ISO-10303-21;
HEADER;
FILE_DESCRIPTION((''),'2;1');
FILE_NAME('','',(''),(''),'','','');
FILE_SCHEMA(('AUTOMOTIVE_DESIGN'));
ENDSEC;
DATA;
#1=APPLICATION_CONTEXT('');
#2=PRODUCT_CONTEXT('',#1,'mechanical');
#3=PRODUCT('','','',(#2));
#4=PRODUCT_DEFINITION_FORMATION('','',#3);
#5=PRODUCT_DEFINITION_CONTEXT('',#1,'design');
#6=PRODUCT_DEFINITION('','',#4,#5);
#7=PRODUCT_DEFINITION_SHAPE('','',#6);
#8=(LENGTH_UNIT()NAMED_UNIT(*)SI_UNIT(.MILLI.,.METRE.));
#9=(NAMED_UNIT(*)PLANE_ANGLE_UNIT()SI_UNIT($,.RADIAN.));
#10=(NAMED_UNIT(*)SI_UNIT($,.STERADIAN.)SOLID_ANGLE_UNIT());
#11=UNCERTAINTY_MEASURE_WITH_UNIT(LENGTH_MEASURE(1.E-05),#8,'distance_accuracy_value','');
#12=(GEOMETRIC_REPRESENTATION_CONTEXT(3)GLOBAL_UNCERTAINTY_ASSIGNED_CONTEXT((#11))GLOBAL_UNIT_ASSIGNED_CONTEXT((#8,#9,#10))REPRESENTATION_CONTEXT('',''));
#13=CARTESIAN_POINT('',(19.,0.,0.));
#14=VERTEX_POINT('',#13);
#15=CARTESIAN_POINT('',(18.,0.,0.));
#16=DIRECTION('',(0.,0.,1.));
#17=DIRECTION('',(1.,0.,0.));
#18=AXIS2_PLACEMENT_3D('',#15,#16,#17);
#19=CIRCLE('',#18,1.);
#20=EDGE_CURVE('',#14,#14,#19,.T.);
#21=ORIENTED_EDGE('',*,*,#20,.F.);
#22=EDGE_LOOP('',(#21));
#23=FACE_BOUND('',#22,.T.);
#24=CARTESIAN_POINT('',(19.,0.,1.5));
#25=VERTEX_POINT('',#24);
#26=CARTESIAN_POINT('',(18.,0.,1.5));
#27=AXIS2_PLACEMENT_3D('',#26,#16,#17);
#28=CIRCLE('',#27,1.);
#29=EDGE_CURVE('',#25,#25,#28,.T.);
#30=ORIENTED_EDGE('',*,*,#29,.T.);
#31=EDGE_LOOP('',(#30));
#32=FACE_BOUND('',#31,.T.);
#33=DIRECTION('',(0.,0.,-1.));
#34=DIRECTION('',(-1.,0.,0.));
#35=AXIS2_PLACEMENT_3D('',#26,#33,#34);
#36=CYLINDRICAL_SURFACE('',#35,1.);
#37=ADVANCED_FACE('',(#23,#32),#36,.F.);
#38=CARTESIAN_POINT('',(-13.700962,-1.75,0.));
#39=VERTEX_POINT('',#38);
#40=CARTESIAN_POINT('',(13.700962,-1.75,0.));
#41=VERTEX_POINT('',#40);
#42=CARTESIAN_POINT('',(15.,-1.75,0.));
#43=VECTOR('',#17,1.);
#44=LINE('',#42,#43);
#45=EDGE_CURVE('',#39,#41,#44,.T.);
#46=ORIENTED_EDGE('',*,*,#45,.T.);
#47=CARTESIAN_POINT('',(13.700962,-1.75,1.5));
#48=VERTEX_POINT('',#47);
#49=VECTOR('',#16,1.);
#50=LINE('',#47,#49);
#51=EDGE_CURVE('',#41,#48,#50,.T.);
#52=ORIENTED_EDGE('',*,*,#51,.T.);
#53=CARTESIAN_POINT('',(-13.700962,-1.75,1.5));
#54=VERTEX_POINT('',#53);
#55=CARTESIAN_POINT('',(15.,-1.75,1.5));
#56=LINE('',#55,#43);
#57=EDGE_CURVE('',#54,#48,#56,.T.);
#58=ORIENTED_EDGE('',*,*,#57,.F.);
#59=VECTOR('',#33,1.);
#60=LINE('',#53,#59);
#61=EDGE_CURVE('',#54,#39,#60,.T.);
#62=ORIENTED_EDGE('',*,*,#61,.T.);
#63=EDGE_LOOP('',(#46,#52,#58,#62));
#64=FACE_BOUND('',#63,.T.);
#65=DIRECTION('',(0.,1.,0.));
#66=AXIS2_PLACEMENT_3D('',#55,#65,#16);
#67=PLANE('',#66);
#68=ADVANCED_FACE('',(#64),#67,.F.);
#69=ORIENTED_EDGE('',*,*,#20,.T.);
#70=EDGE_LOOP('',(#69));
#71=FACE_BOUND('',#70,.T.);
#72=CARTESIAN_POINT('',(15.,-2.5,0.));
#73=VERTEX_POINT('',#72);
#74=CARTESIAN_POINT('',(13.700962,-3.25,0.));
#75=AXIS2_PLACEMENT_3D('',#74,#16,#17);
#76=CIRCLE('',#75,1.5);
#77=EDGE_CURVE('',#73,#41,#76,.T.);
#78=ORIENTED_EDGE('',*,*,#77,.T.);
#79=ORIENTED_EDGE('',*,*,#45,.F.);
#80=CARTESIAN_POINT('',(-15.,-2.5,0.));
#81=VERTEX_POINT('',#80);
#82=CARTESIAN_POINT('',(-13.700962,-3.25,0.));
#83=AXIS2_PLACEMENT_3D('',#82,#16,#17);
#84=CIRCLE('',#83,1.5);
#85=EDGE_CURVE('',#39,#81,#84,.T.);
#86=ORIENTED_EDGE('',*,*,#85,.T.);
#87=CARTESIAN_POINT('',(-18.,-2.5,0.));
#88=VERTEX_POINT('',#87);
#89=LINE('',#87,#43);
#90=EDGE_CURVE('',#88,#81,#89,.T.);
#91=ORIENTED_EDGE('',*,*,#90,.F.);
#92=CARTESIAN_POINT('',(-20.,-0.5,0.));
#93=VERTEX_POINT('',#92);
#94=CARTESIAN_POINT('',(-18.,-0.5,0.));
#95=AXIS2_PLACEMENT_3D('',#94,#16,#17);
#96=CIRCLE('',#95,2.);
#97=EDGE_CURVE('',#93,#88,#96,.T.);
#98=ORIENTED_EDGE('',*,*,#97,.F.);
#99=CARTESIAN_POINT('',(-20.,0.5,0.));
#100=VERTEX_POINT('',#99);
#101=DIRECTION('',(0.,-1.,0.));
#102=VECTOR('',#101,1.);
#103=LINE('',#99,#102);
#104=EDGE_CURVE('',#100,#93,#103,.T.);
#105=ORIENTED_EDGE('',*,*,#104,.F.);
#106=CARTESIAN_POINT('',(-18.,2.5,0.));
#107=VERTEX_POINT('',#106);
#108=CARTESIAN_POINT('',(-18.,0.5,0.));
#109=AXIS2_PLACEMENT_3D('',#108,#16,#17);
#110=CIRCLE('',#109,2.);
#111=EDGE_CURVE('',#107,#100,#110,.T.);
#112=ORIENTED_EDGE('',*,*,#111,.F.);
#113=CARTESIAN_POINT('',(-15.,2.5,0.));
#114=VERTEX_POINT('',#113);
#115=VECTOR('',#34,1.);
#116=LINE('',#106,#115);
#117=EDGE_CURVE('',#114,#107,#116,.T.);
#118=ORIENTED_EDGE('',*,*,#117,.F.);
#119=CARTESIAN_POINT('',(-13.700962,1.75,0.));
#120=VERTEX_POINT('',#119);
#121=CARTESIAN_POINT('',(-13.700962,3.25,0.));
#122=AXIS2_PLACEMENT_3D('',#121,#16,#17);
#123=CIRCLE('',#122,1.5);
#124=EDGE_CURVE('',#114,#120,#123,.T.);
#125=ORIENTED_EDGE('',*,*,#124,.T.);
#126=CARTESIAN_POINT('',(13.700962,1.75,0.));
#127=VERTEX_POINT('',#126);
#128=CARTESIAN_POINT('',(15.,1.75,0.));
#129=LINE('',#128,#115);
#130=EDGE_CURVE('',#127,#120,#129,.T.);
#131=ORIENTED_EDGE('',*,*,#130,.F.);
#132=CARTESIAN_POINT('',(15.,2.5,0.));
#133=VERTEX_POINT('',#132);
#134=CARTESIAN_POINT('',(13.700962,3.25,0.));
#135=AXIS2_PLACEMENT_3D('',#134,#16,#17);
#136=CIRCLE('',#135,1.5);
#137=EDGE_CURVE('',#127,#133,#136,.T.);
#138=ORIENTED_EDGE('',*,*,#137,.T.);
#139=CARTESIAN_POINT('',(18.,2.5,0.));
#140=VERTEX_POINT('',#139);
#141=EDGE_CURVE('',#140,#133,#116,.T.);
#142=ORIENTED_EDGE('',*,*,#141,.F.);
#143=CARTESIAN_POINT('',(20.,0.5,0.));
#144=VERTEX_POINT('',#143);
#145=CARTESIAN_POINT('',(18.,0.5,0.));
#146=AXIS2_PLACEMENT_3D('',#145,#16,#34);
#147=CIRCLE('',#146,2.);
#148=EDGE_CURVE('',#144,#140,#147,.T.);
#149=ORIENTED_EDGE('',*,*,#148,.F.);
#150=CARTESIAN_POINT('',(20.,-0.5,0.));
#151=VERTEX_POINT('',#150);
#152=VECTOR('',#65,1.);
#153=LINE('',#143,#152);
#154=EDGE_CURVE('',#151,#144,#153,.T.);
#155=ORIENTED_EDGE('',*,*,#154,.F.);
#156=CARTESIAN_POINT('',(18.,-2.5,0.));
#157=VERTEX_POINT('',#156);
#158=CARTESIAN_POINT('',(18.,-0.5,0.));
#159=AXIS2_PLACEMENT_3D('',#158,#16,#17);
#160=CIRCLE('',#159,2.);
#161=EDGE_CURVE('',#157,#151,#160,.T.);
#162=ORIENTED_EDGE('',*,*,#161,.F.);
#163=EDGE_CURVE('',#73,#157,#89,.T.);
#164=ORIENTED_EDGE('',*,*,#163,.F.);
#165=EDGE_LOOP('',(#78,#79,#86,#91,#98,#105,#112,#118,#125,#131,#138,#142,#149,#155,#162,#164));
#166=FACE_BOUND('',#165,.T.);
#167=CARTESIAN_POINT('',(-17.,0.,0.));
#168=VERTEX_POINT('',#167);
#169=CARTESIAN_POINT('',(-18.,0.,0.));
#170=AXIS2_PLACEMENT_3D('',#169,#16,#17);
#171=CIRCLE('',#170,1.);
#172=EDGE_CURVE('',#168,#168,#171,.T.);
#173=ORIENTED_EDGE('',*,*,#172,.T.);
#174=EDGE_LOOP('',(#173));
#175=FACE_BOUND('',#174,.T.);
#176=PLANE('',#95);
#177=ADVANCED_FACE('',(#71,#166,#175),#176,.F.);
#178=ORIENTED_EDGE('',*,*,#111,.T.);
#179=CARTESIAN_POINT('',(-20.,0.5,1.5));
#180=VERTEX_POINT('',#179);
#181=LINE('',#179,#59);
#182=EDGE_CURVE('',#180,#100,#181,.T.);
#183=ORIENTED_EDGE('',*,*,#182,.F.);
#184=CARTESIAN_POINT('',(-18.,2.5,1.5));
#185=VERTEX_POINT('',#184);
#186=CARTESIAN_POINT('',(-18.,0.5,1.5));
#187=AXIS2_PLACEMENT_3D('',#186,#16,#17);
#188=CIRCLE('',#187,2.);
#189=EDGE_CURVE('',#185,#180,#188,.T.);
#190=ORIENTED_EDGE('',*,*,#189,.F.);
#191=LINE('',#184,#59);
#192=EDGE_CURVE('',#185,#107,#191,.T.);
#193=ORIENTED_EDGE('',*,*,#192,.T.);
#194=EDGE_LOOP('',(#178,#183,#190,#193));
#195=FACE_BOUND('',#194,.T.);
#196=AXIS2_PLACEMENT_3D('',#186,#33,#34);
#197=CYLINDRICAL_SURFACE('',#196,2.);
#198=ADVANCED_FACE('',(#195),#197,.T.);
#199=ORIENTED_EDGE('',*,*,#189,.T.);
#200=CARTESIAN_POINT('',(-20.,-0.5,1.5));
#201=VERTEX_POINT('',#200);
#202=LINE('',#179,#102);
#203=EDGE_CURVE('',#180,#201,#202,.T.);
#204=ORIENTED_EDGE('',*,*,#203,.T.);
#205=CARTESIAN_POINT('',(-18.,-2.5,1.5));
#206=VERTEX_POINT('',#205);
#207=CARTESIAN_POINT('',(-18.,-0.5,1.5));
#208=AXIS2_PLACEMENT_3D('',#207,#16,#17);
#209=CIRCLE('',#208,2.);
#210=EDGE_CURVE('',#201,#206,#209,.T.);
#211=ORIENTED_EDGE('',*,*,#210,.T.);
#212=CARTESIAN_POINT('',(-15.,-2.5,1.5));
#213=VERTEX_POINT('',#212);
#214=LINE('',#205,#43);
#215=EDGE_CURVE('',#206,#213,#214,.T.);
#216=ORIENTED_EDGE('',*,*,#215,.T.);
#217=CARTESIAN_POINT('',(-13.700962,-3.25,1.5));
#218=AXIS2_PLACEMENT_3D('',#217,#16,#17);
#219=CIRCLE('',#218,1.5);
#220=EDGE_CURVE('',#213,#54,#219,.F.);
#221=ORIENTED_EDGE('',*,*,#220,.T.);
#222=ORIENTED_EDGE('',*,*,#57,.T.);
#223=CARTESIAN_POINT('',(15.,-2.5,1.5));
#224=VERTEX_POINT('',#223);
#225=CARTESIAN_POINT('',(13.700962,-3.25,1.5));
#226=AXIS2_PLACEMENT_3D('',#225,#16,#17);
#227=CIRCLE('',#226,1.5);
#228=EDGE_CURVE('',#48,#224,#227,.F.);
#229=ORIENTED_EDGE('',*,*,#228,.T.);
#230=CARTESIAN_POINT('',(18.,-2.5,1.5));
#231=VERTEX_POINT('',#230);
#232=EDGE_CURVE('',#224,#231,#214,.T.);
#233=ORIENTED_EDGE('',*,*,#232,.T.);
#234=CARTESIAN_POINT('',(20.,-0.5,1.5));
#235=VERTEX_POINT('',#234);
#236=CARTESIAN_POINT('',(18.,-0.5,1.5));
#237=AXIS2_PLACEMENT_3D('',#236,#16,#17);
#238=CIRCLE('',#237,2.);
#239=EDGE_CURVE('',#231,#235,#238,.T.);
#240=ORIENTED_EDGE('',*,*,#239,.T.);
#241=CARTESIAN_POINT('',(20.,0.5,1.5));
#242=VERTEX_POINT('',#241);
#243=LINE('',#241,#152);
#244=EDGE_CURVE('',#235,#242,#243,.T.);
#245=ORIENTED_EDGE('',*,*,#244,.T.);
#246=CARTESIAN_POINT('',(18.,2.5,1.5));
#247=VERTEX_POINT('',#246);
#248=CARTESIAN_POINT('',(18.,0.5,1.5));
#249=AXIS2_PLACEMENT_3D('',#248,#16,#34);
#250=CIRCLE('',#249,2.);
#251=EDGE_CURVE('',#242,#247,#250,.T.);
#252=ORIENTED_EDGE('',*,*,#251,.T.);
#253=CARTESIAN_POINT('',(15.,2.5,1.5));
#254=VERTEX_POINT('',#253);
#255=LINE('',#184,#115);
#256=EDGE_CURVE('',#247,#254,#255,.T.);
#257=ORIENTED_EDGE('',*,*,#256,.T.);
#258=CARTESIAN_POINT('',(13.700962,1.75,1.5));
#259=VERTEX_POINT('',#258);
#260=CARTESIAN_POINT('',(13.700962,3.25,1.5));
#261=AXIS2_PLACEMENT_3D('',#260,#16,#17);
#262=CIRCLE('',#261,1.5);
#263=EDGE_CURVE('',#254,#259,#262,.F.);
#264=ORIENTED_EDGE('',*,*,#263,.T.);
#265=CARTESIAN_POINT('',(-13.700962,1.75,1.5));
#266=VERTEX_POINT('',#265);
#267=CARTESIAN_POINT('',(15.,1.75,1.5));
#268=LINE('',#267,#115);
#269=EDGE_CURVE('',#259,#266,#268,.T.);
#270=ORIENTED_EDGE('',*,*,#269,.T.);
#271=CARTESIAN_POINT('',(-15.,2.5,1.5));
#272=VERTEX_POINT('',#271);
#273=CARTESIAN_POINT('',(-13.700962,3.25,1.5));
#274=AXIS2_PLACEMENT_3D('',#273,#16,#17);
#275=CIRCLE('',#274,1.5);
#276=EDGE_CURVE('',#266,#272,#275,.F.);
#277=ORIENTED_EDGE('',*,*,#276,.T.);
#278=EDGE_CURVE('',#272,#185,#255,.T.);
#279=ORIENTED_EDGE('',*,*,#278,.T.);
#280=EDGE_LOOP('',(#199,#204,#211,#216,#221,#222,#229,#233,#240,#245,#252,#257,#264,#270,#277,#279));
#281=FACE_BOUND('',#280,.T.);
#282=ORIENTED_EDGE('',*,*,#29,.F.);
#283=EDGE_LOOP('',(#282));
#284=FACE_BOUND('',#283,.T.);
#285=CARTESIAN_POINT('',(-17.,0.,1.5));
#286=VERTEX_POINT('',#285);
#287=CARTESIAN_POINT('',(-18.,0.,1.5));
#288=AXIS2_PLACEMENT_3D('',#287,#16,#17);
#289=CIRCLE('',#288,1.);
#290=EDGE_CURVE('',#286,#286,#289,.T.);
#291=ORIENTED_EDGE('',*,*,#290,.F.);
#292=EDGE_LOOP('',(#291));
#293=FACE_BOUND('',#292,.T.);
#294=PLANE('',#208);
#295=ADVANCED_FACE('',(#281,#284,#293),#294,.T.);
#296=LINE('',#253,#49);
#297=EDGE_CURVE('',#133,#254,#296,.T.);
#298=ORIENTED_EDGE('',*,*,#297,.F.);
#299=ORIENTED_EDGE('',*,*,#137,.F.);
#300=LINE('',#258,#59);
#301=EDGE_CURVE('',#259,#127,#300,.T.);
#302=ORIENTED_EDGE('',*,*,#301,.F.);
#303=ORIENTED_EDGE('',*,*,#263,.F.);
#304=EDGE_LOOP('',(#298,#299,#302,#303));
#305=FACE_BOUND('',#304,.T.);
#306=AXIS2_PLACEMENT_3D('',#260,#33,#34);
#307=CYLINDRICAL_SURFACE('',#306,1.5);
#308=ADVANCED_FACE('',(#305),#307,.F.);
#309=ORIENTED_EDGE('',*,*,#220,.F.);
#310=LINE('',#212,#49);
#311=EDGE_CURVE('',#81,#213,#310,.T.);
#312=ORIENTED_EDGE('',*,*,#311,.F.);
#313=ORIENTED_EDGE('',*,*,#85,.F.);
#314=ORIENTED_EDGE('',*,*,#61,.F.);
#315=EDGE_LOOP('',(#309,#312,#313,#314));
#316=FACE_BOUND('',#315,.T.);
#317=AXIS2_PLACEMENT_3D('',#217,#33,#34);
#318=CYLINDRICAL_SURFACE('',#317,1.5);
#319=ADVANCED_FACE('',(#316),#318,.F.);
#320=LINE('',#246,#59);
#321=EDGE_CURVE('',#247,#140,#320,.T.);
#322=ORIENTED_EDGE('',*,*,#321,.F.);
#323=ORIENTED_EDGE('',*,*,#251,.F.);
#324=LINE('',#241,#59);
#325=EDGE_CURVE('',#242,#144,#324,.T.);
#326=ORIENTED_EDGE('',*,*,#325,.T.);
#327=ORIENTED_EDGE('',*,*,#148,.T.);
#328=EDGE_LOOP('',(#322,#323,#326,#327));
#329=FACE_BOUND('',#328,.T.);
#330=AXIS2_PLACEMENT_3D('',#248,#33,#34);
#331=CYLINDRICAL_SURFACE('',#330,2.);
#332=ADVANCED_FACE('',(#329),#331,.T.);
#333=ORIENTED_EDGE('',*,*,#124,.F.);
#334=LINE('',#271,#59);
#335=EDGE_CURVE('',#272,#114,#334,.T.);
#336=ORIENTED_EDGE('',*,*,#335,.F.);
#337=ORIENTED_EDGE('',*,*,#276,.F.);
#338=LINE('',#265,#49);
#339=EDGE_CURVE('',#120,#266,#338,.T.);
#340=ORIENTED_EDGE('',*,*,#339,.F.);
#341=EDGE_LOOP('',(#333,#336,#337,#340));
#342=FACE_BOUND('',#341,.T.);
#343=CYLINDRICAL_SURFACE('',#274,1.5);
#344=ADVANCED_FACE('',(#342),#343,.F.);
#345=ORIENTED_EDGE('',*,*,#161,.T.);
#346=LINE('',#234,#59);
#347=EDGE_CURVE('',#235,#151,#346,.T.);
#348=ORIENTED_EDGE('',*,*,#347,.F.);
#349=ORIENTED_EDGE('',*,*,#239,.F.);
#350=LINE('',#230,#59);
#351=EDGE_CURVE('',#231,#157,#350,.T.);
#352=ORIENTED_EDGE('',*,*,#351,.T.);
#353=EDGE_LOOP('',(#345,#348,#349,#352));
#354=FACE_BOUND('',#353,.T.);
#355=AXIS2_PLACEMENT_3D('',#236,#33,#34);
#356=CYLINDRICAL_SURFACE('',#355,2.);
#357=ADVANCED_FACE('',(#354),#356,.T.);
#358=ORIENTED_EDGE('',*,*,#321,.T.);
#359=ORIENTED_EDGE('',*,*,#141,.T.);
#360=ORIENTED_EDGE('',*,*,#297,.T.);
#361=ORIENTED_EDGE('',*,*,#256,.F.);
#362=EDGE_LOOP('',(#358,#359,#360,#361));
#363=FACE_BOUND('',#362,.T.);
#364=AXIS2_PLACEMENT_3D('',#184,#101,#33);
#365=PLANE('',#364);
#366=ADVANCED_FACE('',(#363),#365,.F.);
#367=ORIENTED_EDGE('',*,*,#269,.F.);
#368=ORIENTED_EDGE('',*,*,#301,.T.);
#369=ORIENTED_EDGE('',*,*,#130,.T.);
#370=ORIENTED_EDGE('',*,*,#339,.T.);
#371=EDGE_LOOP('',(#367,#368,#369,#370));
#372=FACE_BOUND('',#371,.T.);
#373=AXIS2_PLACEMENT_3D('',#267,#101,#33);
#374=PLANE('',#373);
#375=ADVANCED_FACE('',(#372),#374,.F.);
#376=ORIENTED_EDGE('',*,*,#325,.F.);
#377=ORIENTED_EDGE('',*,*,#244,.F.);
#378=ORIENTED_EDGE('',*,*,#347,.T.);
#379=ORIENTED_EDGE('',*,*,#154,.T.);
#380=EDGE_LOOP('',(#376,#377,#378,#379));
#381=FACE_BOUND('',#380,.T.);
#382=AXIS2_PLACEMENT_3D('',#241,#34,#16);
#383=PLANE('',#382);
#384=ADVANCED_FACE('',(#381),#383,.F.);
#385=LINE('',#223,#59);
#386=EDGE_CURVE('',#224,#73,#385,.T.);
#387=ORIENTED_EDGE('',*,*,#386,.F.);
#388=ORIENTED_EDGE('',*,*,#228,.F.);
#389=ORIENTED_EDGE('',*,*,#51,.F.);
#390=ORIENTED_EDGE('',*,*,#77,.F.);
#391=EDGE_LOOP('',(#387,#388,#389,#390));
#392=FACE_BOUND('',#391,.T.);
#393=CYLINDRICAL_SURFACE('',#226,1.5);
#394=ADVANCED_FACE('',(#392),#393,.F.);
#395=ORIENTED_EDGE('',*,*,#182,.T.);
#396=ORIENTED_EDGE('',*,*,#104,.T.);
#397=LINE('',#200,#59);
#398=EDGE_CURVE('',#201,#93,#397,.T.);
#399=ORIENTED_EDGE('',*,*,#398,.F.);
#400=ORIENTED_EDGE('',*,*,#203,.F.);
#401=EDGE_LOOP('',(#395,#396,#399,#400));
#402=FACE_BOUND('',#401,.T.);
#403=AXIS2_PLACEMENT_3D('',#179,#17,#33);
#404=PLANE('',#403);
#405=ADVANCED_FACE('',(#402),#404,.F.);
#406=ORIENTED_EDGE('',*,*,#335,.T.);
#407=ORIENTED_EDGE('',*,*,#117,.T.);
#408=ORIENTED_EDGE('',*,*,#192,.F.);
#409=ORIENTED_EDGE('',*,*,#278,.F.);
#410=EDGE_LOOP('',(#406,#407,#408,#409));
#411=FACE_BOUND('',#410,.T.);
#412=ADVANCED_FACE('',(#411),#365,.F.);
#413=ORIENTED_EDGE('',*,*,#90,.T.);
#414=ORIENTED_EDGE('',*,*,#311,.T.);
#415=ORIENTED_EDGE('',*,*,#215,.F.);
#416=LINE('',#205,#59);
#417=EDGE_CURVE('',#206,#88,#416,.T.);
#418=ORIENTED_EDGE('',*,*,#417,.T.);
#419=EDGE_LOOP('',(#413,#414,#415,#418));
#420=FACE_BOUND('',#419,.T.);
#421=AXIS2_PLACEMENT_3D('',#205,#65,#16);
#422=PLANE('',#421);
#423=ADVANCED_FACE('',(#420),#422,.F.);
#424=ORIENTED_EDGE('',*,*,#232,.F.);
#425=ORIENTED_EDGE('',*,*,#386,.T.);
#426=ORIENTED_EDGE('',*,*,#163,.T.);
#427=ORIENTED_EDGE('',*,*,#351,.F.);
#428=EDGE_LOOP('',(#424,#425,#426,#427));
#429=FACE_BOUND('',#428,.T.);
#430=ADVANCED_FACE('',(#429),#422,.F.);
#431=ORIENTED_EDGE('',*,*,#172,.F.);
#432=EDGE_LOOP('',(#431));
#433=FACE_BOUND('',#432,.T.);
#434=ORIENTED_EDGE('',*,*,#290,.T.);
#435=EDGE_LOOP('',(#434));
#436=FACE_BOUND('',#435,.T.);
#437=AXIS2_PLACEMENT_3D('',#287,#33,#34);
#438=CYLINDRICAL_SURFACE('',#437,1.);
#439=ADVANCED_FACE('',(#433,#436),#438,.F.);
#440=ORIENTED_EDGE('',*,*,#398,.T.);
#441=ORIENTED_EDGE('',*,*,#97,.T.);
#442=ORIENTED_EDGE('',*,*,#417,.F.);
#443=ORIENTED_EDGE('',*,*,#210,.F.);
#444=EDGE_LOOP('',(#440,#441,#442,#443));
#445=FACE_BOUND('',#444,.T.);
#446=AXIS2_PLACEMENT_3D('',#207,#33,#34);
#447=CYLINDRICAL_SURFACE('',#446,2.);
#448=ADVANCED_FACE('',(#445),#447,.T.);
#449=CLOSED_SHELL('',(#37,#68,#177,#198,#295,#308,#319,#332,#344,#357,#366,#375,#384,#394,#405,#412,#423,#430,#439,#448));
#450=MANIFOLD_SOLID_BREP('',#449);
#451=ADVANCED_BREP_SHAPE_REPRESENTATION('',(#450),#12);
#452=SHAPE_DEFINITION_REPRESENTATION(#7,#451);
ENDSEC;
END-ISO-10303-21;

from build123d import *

# Parameters (mm, degrees)
SKETCH1_R           = 1
BOSS_EXTRUDE1_DEPTH = 1.5
SKETCH2_W           = 30
SKETCH2_H           = 1.5
CUT_EXTRUDE1_DEPTH  = 21.211382931
FILLET1_R           = 1.5


with BuildPart() as part:
    # Sketch1 → Boss-Extrude1 (new body)
    with BuildSketch(Plane.XY):
        with BuildLine():
            Line((-18, 2.5), (18, 2.5))
            ThreePointArc((18, 2.5), (19.414213562, 1.914213562), (20, 0.5))
            Line((20, 0.5), (20, -0.5))
            ThreePointArc((20, -0.5), (19.414213562, -1.914213562), (18, -2.5))
            Line((18, -2.5), (-18, -2.5))
            ThreePointArc((-18, -2.5), (-19.414213562, -1.914213562), (-20, -0.5))
            Line((-20, -0.5), (-20, 0.5))
            ThreePointArc((-20, 0.5), (-19.414213562, 1.914213562), (-18, 2.5))
        make_face()
        with Locations((18, 0)):
            Circle(SKETCH1_R, mode=Mode.SUBTRACT)
        with Locations((-18, 0)):
            Circle(SKETCH1_R, mode=Mode.SUBTRACT)
    extrude(amount=BOSS_EXTRUDE1_DEPTH)

    # Sketch2 → Cut-Extrude1 (cut, through all)
    with BuildSketch(Plane(origin=(0, 0, 0), x_dir=(-1, 0, 0), z_dir=(0, 0, -1))):
        with Locations((0, 2.5)):
            Rectangle(SKETCH2_W, SKETCH2_H)
        with Locations((0, -2.5)):
            Rectangle(SKETCH2_W, SKETCH2_H)
    extrude(amount=-CUT_EXTRUDE1_DEPTH, mode=Mode.SUBTRACT)

    # Fillet1
    # the kernel refuses this fillet: 1.5 mm, written as the material it adds along each edge
    with BuildSketch(Plane(origin=(15, 1.75, 0), x_dir=(0, 1, 0), z_dir=(0, 0, 1)), Plane(origin=(-15, -1.75, 0), x_dir=(0, -1, 0), z_dir=(0, 0, 1))) as fillet1_piece_1:
        with BuildLine():
            CenterArc((1.5, 1.299038106), FILLET1_R, 180, 60)
            Line((0, 1.299038106), (-0.03, 1.299038106))
            Line((-0.03, 1.299038106), (-0.03, 0))
            Line((-0.03, 0), (0, -0.03))
            ThreePointArc((0, -0.03), (0.375, -0.03), (0.735, -0.025980762))
            Line((0.735, -0.025980762), (0.75, 0))
        make_face()
    extrude(amount=1.5)
    with BuildSketch(Plane(origin=(15, -1.75, 0), x_dir=(-1, 0, 0), z_dir=(0, 0, 1))) as fillet1_piece_2:
        with BuildLine():
            CenterArc((1.299038106, 1.5), FILLET1_R, 210, 60)
            Line((0, 0.75), (-0.025980762, 0.735))
            ThreePointArc((-0.025980762, 0.735), (-0.03, 0.375), (-0.03, 0))
            Line((-0.03, 0), (0, -0.03))
            Line((0, -0.03), (1.299038106, -0.03))
            Line((1.299038106, -0.03), (1.299038106, 0))
        make_face()
    extrude(amount=1.5)
    with BuildSketch(Plane(origin=(-15, 1.75, 0), x_dir=(0, 1, 0), z_dir=(0, 0, 1))) as fillet1_piece_3:
        with BuildLine():
            CenterArc((1.5, -1.299038106), FILLET1_R, 120, 60)
            Line((0, -1.299038106), (-0.03, -1.299038106))
            Line((-0.03, -1.299038106), (-0.03, 0))
            Line((-0.03, 0), (0, 0.03))
            ThreePointArc((0, 0.03), (0.375, 0.03), (0.735, 0.025980762))
            Line((0.735, 0.025980762), (0.75, 0))
        make_face()
    extrude(amount=1.5)


solid = part.part
